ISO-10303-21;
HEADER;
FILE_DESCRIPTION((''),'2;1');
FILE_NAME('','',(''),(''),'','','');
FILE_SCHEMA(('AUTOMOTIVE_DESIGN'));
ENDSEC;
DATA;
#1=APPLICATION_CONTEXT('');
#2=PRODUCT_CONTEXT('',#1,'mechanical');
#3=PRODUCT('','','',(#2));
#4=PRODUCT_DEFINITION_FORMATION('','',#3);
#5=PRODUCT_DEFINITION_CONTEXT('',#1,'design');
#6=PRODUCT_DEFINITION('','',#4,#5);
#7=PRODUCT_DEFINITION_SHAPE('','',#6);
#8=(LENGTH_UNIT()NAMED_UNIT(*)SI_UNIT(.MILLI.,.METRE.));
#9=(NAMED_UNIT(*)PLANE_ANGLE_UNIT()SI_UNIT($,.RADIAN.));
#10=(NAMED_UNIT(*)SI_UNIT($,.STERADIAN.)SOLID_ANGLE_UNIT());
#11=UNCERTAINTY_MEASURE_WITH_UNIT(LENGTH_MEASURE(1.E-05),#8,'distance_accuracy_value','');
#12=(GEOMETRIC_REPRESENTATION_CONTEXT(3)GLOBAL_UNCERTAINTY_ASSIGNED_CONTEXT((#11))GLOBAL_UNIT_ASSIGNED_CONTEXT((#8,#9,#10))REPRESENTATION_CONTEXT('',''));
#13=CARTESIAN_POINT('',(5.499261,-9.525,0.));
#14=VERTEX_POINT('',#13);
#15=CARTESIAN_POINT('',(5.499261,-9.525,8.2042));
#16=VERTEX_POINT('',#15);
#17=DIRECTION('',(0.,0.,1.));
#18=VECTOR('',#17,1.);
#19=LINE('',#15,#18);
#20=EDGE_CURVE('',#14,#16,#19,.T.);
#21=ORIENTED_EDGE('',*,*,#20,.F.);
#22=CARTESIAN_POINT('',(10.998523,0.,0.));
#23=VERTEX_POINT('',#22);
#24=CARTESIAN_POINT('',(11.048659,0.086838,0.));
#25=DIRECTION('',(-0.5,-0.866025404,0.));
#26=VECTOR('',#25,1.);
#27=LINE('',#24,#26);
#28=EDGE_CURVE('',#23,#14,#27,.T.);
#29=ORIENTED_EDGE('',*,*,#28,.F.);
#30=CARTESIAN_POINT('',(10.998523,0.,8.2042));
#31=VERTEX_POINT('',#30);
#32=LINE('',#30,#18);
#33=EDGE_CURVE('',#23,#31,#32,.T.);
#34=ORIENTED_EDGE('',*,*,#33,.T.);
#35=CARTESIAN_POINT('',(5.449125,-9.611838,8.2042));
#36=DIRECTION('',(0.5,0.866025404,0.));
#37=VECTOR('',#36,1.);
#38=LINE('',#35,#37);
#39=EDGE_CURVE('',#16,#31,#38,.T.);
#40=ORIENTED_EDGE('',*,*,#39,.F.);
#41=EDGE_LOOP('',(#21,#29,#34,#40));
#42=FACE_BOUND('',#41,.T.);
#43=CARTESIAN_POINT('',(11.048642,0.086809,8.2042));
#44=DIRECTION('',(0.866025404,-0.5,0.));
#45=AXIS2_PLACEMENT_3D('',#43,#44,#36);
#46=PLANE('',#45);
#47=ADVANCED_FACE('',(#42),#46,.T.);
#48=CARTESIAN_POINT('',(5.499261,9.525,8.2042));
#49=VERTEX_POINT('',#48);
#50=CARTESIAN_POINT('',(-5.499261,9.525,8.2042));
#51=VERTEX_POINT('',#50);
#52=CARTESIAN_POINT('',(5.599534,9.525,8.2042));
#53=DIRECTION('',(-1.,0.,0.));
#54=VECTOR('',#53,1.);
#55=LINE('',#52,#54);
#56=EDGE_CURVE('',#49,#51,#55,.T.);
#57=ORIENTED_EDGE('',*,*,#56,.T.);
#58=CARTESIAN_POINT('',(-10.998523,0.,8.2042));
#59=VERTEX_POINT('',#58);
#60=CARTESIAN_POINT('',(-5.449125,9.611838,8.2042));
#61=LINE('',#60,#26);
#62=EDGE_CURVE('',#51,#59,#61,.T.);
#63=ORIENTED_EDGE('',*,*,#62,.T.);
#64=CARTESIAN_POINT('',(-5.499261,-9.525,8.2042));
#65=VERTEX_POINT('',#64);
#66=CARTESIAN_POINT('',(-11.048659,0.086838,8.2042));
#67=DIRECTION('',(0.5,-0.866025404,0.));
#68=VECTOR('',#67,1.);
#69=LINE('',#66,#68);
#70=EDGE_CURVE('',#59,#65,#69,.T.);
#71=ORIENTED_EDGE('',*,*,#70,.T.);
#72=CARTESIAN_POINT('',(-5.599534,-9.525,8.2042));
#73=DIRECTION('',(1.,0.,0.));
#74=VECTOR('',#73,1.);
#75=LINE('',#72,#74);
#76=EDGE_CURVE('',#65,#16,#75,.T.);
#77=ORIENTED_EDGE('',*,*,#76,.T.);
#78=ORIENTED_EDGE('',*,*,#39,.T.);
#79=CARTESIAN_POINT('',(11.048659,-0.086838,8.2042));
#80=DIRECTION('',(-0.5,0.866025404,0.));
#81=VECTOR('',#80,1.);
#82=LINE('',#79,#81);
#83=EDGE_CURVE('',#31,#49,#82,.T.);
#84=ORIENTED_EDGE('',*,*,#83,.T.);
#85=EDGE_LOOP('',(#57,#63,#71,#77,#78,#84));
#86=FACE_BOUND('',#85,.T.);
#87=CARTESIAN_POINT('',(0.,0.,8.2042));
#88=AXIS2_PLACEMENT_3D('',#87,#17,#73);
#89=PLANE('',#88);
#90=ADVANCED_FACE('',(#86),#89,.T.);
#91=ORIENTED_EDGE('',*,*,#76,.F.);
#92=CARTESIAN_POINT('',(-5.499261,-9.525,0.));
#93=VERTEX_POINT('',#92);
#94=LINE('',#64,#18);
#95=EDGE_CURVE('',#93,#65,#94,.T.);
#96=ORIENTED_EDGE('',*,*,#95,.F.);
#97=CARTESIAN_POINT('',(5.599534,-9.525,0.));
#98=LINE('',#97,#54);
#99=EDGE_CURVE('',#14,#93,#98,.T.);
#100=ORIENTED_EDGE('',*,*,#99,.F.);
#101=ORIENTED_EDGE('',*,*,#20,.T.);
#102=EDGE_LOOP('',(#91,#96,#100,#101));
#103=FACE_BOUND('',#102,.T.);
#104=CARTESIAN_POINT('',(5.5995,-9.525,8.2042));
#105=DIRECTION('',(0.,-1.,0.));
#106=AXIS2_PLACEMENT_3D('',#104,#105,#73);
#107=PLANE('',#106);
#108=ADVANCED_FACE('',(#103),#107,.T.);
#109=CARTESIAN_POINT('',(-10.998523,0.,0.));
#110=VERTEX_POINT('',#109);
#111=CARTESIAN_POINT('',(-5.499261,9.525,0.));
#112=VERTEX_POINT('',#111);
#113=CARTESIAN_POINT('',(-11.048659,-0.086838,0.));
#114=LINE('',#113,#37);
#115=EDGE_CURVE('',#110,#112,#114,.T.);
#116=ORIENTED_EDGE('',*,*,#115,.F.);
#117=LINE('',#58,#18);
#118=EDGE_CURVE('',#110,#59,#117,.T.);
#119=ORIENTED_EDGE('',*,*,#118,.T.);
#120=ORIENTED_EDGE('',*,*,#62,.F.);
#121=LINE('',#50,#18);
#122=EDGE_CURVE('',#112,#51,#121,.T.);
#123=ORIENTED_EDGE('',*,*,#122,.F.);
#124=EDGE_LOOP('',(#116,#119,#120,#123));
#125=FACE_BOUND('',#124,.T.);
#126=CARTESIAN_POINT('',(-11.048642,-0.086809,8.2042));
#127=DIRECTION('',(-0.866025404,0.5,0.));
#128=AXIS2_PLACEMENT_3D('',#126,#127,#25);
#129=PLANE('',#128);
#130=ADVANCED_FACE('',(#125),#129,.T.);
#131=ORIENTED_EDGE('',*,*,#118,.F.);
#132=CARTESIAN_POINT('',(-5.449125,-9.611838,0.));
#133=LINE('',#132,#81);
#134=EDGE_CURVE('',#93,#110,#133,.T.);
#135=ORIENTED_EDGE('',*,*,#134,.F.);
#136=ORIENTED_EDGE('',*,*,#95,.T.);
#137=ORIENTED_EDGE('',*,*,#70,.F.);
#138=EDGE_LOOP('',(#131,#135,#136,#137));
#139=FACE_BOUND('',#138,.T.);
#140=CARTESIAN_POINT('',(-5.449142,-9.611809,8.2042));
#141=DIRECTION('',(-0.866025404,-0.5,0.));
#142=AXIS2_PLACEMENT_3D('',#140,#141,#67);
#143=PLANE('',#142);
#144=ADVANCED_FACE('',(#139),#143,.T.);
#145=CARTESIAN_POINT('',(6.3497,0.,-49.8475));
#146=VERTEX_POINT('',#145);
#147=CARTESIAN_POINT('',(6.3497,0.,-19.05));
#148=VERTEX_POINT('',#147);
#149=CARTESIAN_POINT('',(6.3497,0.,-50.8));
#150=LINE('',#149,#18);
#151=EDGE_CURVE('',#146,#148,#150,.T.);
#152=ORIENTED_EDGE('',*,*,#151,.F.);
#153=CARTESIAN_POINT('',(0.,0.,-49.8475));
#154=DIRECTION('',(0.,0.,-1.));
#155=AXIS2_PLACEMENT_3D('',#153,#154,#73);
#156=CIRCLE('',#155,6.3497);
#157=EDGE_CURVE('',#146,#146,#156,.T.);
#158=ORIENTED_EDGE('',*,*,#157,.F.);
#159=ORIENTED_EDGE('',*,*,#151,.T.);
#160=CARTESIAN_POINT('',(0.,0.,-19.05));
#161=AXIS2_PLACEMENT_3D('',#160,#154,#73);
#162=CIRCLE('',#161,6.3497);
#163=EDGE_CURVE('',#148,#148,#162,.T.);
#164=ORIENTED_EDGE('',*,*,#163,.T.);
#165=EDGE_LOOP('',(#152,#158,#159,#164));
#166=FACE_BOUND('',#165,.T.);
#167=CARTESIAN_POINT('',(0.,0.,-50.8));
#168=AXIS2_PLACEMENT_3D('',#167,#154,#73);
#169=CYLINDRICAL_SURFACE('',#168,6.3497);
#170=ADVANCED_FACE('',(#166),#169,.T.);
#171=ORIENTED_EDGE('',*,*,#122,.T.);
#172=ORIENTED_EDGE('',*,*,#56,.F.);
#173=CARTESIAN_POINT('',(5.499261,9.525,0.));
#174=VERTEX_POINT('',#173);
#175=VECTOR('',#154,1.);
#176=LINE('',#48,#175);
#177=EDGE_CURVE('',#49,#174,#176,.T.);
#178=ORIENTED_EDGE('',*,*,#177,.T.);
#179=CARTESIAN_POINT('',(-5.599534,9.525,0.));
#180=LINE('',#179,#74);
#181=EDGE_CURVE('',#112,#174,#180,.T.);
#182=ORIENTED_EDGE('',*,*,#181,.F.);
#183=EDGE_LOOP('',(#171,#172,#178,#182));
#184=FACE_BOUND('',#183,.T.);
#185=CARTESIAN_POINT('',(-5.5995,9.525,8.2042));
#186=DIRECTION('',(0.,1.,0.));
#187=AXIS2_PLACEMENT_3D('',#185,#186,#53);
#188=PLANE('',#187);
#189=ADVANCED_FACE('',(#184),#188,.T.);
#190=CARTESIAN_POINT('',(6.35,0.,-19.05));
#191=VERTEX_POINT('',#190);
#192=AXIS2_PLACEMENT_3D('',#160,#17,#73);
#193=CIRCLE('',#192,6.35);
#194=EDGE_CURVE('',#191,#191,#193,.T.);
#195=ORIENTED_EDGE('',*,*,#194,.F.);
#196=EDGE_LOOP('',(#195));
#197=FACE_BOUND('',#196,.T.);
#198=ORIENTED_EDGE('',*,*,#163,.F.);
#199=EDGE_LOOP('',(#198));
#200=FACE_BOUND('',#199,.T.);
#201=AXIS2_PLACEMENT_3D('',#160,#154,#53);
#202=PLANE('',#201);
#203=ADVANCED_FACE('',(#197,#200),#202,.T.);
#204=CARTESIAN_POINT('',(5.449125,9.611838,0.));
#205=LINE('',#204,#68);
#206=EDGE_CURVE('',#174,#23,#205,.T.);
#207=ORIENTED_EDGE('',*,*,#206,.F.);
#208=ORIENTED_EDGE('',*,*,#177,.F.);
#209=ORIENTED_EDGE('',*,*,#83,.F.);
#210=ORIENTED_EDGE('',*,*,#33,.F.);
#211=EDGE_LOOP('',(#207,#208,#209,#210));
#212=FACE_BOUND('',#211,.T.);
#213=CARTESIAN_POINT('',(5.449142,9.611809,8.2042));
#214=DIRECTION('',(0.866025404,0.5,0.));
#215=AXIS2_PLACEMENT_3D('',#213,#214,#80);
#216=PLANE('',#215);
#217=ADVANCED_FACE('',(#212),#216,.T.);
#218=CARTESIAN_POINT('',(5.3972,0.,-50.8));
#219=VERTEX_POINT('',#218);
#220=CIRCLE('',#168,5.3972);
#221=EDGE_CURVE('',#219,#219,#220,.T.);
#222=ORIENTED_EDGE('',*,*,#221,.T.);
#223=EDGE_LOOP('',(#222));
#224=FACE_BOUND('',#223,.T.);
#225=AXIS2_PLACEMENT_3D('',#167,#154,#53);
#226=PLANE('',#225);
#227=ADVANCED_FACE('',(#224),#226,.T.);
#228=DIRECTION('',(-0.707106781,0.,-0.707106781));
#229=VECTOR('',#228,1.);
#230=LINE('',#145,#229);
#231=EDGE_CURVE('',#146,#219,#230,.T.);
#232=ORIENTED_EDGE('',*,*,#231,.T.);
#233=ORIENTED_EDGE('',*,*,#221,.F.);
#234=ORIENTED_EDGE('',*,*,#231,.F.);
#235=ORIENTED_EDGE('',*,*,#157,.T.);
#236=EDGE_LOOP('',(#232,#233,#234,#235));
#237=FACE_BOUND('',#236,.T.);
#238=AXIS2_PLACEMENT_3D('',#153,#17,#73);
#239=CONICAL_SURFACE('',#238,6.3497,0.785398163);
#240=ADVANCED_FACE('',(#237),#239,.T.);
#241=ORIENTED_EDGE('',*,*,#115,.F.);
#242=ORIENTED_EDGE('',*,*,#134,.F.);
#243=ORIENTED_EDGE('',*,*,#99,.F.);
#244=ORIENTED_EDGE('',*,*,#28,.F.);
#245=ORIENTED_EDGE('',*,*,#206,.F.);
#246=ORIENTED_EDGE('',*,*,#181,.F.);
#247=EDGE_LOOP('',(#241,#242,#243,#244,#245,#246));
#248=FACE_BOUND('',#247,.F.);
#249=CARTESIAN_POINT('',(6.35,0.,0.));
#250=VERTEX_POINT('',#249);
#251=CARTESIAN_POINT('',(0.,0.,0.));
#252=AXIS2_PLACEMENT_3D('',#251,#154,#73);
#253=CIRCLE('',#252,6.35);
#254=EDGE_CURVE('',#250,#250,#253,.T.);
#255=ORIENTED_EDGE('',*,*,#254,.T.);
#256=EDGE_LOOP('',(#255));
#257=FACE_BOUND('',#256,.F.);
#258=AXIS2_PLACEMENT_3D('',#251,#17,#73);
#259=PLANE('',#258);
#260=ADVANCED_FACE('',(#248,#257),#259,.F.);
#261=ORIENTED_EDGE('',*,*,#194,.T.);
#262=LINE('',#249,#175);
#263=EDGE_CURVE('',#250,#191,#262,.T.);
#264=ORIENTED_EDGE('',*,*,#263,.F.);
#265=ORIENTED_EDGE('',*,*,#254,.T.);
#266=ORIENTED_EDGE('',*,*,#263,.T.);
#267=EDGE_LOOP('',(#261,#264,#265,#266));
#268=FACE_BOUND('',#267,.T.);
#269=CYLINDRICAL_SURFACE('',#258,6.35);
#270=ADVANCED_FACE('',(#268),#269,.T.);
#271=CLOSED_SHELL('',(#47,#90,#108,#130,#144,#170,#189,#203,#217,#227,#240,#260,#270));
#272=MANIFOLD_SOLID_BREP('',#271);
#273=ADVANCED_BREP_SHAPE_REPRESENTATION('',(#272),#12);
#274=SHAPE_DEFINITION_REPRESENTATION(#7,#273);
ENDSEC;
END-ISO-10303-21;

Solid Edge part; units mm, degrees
sketch "Sketch1" plane through (0, 0, 0) normal (0, 0, 1) x (1, 0, 0)
  circle A0 centre (0, 0) radius 11.049
  dimension "D1" = 22.098
extrude "Protrusion1" add sketch "Sketch1" along normal blind 8.2042
sketch "Sketch2" plane through (0, 0, 0) normal (0, 0, -1) x (1, 0, 0)
  circle A0 centre (0, 0) radius 6.35
extrude "Protrusion2" add sketch "Sketch2" along normal blind 50.8
sketch "Sketch3" plane through (0, 0, -50.8) normal (0, 0, -1) x (1, 0, 0)
  circle A0 centre (0, 0) radius 6.3497
extrude "Cutout1" cut sketch "Sketch3" against normal blind 31.75 flip side to cut
chamfer "Chamfer_1" distance 0.9525 angle 45 1 edges at (-6.3497, 0, -50.8)
sketch "Sketch4" plane through (0, 0, 8.2042) normal (0, 0, 1) x (1, 0, 0)
  line L0 (-5.5995, 9.525) -> (5.5995, 9.525)
  dimension "D1" = 19.05
extrude "Cutout2" cut sketch "Sketch4" against normal up to next material side at (0, 9.575, 8.2042)
pattern_circular "Pattern1" count 6 over 360 about axis through (0, 0, 8.2042) along (0, 0, 1) of "Cutout2"
properties part number "120471"
